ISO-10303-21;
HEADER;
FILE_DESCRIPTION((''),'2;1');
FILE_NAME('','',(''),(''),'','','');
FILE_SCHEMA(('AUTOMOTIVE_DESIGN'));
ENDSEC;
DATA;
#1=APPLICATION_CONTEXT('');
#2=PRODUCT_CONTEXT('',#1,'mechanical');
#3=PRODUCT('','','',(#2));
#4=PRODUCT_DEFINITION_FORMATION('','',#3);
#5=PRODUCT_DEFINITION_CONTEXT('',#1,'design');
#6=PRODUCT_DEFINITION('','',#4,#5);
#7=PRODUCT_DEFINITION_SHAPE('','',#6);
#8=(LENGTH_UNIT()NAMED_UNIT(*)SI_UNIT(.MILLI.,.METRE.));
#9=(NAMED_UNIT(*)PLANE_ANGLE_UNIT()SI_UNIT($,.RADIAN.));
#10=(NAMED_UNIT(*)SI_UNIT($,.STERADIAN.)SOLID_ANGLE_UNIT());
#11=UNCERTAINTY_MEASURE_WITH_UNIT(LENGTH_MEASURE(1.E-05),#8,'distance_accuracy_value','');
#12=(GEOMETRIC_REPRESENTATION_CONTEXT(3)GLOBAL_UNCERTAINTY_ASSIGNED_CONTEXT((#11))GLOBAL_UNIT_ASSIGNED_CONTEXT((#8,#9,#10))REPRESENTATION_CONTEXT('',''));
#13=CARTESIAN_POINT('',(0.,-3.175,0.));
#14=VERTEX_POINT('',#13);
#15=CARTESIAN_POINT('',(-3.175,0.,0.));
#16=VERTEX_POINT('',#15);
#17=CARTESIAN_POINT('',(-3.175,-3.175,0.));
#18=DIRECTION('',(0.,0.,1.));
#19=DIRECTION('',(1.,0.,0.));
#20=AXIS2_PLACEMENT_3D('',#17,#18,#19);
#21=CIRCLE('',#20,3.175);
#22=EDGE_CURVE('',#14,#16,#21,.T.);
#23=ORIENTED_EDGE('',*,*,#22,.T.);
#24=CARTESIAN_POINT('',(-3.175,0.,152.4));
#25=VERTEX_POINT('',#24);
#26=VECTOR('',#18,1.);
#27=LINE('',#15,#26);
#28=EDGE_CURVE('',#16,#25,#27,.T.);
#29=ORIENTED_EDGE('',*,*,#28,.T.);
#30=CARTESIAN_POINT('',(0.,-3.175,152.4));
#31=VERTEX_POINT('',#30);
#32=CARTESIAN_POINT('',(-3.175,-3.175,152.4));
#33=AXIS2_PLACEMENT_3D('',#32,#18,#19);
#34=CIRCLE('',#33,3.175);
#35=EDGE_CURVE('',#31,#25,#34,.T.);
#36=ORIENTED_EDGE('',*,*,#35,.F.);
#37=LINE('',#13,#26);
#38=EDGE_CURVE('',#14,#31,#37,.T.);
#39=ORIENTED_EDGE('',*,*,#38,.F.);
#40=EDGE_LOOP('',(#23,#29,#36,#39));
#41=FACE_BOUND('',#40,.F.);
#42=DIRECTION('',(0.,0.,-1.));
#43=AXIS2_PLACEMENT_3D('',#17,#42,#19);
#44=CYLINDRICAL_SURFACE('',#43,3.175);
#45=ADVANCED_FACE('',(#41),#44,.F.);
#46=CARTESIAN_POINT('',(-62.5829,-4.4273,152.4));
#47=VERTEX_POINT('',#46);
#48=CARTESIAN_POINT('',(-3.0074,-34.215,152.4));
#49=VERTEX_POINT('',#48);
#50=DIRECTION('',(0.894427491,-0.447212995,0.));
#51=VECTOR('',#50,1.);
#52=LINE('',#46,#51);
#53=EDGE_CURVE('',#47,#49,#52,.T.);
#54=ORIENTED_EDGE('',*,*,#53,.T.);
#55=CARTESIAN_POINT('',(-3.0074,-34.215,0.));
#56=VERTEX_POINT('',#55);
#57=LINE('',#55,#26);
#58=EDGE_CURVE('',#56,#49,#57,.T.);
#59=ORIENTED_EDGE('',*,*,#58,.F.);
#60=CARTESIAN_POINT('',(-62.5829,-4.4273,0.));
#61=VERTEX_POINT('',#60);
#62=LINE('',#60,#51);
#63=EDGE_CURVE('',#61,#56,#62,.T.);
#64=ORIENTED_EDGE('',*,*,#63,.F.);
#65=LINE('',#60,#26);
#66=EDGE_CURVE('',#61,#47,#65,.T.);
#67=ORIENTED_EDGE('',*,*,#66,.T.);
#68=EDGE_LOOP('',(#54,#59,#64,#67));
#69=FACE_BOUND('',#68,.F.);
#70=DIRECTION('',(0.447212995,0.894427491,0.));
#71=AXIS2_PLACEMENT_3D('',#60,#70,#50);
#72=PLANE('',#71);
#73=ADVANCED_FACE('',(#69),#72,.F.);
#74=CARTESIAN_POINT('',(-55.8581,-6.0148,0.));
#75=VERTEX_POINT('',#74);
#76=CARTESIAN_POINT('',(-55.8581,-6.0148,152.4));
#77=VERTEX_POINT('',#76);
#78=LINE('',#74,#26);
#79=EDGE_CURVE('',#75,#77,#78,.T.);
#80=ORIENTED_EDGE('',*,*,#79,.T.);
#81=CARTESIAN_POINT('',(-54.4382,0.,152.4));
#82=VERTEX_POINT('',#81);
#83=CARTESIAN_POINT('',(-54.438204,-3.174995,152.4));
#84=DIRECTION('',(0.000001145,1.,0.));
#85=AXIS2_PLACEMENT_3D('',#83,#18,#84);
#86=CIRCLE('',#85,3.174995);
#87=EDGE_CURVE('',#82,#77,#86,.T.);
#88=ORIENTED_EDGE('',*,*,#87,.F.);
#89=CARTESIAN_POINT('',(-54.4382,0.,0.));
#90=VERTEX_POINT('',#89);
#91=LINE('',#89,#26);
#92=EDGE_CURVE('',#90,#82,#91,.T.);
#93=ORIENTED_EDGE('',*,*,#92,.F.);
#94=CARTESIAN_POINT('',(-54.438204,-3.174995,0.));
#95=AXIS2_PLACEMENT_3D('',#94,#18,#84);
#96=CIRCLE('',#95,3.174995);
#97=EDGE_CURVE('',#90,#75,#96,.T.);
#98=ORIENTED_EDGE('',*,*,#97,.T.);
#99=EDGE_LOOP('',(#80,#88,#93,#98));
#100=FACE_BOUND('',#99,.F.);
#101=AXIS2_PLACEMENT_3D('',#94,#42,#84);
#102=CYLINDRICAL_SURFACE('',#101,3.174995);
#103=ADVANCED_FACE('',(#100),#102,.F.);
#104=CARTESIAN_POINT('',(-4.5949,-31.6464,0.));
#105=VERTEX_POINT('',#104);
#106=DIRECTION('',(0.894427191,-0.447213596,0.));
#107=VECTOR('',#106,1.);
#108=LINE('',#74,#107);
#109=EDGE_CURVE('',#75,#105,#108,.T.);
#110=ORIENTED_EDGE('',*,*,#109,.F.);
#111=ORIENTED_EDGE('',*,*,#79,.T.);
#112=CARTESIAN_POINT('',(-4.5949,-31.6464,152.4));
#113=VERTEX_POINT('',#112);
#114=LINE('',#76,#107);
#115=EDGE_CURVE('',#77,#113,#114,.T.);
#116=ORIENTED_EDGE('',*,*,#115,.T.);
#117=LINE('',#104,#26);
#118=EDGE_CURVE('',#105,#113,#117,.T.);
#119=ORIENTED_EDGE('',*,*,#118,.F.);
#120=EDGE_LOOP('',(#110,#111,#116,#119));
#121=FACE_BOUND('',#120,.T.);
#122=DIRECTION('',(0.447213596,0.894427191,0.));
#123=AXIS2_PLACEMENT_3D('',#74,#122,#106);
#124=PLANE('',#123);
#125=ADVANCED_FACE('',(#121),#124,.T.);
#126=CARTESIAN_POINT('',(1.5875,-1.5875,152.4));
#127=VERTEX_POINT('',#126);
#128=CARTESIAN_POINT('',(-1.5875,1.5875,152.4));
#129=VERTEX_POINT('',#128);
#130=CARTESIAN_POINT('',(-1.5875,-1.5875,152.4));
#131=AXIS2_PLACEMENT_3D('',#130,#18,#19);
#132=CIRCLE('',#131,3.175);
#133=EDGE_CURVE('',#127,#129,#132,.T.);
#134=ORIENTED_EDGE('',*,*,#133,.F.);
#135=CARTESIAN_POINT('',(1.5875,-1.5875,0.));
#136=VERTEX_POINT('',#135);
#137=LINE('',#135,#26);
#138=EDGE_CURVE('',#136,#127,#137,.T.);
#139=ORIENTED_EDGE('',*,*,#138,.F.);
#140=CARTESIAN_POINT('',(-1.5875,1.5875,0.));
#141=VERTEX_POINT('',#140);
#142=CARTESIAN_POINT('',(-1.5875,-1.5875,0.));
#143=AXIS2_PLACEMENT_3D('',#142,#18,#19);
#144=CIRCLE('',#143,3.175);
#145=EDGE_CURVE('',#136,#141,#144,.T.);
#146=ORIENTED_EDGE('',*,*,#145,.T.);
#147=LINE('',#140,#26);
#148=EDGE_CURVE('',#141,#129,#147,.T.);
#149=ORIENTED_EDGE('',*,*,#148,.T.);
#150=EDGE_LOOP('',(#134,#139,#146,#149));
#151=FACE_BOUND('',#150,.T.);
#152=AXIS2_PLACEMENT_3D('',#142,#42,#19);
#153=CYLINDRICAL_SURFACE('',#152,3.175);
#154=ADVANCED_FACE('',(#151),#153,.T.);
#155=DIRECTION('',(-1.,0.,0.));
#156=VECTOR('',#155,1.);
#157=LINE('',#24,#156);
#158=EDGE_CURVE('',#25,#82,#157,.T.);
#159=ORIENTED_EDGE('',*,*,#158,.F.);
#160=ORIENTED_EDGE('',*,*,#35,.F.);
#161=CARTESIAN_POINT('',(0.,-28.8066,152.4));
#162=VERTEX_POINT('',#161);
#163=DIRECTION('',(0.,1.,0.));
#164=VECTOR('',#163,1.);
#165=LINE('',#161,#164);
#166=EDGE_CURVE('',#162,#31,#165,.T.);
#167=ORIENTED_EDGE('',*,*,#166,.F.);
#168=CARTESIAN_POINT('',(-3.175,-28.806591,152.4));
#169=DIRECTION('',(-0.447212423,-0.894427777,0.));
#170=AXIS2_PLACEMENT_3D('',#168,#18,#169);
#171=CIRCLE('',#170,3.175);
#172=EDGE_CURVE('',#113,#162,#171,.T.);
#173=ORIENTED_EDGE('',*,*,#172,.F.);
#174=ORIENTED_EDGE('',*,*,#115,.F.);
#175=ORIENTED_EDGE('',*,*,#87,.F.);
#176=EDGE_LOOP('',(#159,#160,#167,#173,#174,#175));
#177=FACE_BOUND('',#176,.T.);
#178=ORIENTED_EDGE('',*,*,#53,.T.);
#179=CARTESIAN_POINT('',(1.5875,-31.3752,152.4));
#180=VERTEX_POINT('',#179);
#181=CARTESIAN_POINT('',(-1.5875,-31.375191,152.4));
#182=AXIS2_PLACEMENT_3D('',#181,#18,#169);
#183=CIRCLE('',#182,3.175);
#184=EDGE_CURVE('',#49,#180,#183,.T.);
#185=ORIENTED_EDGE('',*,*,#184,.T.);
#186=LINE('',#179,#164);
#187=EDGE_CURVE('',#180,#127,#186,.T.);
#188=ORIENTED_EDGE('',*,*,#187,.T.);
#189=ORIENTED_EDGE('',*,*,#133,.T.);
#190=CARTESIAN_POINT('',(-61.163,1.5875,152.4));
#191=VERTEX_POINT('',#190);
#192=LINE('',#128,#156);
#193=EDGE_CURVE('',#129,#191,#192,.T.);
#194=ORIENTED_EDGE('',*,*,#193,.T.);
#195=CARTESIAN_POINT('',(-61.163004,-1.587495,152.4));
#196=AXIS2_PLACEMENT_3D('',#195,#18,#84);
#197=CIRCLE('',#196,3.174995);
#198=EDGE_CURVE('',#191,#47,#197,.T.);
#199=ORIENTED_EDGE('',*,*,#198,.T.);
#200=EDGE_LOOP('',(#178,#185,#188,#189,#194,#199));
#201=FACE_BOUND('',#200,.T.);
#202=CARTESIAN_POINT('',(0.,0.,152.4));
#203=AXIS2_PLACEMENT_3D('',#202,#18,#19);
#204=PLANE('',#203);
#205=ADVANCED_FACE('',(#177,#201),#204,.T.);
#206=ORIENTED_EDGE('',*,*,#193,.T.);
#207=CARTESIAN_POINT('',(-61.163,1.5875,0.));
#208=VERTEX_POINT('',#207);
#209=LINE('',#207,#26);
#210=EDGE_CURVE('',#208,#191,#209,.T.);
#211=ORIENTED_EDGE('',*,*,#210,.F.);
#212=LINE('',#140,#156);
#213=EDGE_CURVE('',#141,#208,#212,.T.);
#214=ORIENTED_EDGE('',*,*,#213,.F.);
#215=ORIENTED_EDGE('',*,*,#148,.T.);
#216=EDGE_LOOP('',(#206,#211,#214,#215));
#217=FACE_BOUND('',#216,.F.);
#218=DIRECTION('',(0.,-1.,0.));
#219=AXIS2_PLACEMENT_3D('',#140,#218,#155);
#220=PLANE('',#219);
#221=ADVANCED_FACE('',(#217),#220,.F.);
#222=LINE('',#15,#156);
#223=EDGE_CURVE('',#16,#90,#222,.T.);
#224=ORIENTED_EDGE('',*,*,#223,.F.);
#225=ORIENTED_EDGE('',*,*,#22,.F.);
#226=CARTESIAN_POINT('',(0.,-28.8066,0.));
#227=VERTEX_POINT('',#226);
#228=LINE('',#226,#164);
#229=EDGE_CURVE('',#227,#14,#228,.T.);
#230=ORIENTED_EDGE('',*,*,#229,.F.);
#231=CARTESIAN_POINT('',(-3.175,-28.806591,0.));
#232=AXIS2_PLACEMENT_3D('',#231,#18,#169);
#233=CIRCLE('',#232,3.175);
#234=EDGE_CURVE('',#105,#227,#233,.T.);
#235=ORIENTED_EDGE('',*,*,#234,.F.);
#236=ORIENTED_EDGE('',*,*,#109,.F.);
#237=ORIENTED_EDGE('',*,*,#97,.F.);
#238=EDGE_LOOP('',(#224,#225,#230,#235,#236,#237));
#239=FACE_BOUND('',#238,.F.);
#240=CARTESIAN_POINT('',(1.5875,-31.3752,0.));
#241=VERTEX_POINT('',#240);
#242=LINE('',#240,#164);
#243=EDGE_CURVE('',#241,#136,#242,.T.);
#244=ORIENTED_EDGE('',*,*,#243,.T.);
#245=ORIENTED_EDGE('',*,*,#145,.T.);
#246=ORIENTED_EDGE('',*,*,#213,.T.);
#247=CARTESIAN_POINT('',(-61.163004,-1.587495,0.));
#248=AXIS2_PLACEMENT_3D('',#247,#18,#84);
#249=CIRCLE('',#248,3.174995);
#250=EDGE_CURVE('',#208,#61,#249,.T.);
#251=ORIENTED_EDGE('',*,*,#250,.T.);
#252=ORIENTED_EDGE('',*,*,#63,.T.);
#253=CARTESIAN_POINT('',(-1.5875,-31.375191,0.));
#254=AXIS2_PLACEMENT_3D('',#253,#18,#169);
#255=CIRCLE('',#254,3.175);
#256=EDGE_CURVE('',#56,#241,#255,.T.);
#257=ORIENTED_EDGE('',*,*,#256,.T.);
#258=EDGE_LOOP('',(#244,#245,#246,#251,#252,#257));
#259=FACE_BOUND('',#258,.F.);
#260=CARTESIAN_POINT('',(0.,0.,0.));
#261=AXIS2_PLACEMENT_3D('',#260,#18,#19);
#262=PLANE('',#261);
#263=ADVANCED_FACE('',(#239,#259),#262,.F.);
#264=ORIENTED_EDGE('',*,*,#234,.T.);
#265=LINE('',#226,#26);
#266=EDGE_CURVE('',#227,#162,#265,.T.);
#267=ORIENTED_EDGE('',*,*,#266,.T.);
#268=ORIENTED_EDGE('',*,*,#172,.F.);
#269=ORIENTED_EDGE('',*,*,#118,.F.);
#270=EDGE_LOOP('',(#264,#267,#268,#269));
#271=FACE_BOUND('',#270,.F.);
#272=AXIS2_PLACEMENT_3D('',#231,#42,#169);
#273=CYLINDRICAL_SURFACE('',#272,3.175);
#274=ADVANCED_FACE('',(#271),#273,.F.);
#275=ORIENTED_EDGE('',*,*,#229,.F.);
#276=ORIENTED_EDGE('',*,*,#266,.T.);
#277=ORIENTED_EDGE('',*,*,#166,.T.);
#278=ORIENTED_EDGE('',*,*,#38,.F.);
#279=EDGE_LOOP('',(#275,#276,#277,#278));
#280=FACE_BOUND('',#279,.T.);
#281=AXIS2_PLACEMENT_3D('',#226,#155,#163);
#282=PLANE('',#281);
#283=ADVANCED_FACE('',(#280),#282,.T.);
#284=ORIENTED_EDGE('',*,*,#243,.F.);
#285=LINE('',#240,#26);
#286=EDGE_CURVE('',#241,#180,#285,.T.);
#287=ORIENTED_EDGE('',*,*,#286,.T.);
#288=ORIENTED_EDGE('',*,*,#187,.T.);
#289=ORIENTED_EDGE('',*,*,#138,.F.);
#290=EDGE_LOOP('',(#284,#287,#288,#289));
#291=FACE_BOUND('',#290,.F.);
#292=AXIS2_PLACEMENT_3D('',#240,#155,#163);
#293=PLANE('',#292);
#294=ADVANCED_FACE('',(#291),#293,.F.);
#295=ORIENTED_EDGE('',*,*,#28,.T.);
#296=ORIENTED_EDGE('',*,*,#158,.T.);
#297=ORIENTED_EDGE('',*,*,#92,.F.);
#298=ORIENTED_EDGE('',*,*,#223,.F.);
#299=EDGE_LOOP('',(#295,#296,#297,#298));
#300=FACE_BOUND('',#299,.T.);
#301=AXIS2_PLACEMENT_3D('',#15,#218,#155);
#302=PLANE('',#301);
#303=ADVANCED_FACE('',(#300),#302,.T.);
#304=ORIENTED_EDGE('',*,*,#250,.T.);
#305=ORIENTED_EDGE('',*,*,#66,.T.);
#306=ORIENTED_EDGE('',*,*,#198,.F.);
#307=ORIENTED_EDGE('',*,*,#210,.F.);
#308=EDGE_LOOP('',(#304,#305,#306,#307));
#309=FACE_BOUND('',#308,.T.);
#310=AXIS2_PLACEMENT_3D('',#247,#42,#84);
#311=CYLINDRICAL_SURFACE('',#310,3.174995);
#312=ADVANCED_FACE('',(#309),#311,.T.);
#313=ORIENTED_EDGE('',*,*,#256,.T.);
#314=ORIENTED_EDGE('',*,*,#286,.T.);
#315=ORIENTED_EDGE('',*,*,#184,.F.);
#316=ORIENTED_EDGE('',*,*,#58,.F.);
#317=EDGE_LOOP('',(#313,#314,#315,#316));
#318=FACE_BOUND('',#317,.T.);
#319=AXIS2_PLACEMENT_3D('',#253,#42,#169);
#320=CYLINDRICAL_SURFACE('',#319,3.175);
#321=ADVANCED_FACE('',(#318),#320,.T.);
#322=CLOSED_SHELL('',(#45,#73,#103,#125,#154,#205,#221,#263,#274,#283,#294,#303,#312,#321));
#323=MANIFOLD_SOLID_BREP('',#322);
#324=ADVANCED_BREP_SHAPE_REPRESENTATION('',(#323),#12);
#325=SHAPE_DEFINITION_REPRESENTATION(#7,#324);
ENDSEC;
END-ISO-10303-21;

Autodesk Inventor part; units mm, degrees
ref_plane "YZ Plane" through (0, 0, 0) normal (1, 0, 0) x (0, 1, 0)
ref_plane "XZ Plane" through (0, 0, 0) normal (0, 1, 0) x (-1, 0, 0)
ref_plane "XY Plane" through (0, 0, 0) normal (0, 0, 1) x (1, 0, 0)
sketch "Sketch1" plane through (0, 0, 0) normal (0, 0, 1) x (1, 0, 0)
  line L0 (-3.175, 0) -> (-54.4382, 0)
  line L1 (-55.8581, -6.0148) -> (-4.5949, -31.6464)
  line L2 (0, -28.8066) -> (0, -3.175)
  line L3 (-1.5875, 1.5875) -> (-61.163, 1.5875)
  line L4 (-62.5829, -4.4273) -> (-3.0074, -34.215)
  line L5 (1.5875, -31.3752) -> (1.5875, -1.5875)
  arc A0 (-54.4382, 0) -> (-55.8581, -6.0148) centre (-54.4382, -3.175) ccw
  arc A1 (-61.163, 1.5875) -> (-62.5829, -4.4273) centre (-61.163, -1.5875) ccw
  arc A2 (-4.5949, -31.6464) -> (0, -28.8066) centre (-3.175, -28.8066) ccw
  arc A3 (-3.0074, -34.215) -> (1.5875, -31.3752) centre (-1.5875, -31.3752) ccw
  arc A4 (0, -3.175) -> (-3.175, 0) centre (-3.175, -3.175) ccw
  arc A5 (1.5875, -1.5875) -> (-1.5875, 1.5875) centre (-1.5875, -1.5875) ccw
  point P0 (0, 0)
  point P1 (-67.8877, 0)
  point P2 (0, -33.9439)
  point P3 (1.5875, 1.5875)
  point P4 (-74.6125, 1.5875)
  point P5 (1.5875, -36.5125)
  dimension "d0" = 1.5875
  dimension "d1" = 1.5875
  dimension "d2" = 1.5875
  dimension "d3" = 76.2
  dimension "d4" = 38.1
  dimension "d7" = 3.175
  dimension "d8" = 3.175
extrude "Extrusion1" add sketch "Sketch1" along normal blind 152.4
properties part number "BatteryMount" material "Aluminum-6061"
